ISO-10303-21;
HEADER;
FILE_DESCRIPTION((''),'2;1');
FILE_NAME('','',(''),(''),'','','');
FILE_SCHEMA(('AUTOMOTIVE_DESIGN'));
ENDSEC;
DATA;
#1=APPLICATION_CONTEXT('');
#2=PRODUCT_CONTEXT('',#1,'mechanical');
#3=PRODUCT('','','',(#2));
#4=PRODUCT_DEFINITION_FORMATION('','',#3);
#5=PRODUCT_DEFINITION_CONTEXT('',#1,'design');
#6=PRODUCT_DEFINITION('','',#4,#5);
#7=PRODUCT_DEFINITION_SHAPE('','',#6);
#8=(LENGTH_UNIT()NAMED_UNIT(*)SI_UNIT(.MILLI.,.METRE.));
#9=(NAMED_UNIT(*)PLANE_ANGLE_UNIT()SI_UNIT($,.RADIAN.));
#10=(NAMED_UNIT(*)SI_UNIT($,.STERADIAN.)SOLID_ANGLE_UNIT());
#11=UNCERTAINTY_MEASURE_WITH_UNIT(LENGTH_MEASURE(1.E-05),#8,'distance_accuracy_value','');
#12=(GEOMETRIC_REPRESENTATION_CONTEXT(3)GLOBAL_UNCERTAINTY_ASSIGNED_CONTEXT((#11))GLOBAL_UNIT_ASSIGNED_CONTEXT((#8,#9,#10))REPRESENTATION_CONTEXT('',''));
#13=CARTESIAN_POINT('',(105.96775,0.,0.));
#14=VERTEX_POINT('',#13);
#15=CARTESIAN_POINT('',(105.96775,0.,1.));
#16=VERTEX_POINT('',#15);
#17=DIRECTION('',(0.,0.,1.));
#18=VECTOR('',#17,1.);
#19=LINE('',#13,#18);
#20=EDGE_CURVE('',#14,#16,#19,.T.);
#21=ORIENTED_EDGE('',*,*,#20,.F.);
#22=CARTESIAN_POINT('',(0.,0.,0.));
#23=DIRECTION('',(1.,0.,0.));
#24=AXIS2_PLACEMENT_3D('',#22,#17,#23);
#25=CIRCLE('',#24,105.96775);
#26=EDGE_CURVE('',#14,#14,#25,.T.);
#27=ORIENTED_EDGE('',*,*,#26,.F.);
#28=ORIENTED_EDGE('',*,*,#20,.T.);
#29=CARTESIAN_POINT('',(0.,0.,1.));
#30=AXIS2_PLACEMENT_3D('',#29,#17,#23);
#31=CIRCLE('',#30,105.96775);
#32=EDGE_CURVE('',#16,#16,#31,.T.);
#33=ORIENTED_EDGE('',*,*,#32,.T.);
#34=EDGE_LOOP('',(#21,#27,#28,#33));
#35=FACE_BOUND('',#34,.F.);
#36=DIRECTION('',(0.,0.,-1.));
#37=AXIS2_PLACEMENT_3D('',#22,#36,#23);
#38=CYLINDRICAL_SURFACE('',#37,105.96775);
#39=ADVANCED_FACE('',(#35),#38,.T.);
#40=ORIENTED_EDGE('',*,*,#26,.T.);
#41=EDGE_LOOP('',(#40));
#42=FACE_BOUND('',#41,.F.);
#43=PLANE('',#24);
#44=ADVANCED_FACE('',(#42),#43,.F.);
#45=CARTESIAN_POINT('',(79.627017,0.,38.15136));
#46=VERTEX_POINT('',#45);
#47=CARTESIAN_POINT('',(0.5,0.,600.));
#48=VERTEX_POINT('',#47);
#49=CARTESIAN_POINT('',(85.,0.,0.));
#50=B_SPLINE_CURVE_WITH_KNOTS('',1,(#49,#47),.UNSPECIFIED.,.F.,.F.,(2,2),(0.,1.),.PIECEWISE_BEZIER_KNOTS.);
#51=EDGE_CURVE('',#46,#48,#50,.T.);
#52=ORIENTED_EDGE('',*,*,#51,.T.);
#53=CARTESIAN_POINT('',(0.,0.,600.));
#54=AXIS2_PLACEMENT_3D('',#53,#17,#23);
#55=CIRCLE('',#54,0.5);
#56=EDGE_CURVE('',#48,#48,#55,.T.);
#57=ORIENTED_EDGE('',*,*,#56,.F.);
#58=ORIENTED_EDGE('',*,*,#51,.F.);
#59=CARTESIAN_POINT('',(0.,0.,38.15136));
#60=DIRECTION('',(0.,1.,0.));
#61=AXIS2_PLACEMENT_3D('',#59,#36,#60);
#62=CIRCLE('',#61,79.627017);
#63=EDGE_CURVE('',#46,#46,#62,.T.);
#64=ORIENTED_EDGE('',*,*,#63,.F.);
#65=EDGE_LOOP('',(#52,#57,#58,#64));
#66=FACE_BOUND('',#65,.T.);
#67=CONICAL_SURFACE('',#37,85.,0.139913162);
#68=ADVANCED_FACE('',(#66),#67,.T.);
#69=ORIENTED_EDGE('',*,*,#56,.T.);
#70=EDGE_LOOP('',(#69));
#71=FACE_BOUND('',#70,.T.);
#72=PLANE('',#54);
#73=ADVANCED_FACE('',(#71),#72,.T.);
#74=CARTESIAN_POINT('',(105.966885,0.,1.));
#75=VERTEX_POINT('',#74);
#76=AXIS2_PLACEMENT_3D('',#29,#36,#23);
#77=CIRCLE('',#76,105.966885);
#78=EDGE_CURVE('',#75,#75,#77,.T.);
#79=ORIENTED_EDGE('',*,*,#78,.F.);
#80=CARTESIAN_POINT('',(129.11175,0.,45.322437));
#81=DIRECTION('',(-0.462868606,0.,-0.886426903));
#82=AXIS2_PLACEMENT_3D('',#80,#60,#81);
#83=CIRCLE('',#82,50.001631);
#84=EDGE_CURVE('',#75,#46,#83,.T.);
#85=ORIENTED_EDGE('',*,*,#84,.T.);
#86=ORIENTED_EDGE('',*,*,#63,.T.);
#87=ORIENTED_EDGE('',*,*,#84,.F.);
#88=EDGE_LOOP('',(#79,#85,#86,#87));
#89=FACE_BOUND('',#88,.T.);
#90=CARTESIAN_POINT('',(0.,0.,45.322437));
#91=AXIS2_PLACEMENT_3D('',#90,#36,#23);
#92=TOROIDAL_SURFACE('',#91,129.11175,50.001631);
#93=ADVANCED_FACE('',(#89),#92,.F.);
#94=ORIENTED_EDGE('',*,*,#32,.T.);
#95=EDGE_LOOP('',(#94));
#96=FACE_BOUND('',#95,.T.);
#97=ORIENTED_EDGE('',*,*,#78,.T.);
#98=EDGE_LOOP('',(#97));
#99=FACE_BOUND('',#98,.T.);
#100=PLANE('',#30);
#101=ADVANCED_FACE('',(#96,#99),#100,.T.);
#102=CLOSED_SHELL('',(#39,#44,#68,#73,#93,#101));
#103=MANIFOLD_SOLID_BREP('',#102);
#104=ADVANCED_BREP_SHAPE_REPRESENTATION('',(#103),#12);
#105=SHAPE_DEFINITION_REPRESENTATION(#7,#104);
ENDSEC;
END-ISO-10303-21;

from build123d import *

# Parameters (mm, degrees)
F0_R     = 85
F2_R     = 0.5
F4_R     = 105.9677495378
F5_DEPTH = 1


# Not quite as in the source:
# - a fillet or chamfer that OpenCascade refuses, or shapes differently, is made with other operations: its cross-section is extruded or revolved along the edge and cut away or added


with BuildPart() as f3:
    # F0 (on Top) → F3 section 0
    with BuildSketch(Plane.XY):
        Circle(F0_R)
    # F2 (on offset) → F3 section 1
    with BuildSketch(Plane.XY.offset(600)):
        Circle(F2_R)
    loft()

    # F4 (on Top) → F5 (join)
    with BuildSketch(Plane.XY):
        Circle(F4_R)
    extrude(amount=F5_DEPTH)

    # F6: fillet of radius 50 on 1 edges, made by hand


with BuildPart() as f6_tool2:
    # F6_s3 → F6_t4 (revolve)
    with BuildSketch(Plane.XZ):
        with BuildLine():
            ThreePointArc((105.9675643904, 0.9996454292), (88.2642581979, 16.4841709207), (79.5987288587, 38.349352857))
            Line((79.5987288587, 38.349352857), (74.6474267674, 37.6520444791))
            ThreePointArc((74.6474267674, 37.6520444791), (77.2778437171, 18.9773959421), (79.9078645754, 0.3026916222))
            Line((79.9078645754, 0.3026916222), (84.8591666667, -4.0001631346))
            ThreePointArc((84.8591666667, -4.0001631346), (95.4133655285, -4.0001631346), (103.6531458523, -3.4326336914))
            Line((103.6531458523, -3.4326336914), (105.9675643904, 0.9996454292))
        make_face()
    revolve(axis=Axis((0, 0, 1), (0, 0, 1)))

    split(bisect_by=Plane.XY, keep=Keep.TOP)


with BuildPart() as f3_1:
    add(f3.part)

    # F6_t1: union F6_tool2
    add(f6_tool2.part)


solid = f3_1.part
